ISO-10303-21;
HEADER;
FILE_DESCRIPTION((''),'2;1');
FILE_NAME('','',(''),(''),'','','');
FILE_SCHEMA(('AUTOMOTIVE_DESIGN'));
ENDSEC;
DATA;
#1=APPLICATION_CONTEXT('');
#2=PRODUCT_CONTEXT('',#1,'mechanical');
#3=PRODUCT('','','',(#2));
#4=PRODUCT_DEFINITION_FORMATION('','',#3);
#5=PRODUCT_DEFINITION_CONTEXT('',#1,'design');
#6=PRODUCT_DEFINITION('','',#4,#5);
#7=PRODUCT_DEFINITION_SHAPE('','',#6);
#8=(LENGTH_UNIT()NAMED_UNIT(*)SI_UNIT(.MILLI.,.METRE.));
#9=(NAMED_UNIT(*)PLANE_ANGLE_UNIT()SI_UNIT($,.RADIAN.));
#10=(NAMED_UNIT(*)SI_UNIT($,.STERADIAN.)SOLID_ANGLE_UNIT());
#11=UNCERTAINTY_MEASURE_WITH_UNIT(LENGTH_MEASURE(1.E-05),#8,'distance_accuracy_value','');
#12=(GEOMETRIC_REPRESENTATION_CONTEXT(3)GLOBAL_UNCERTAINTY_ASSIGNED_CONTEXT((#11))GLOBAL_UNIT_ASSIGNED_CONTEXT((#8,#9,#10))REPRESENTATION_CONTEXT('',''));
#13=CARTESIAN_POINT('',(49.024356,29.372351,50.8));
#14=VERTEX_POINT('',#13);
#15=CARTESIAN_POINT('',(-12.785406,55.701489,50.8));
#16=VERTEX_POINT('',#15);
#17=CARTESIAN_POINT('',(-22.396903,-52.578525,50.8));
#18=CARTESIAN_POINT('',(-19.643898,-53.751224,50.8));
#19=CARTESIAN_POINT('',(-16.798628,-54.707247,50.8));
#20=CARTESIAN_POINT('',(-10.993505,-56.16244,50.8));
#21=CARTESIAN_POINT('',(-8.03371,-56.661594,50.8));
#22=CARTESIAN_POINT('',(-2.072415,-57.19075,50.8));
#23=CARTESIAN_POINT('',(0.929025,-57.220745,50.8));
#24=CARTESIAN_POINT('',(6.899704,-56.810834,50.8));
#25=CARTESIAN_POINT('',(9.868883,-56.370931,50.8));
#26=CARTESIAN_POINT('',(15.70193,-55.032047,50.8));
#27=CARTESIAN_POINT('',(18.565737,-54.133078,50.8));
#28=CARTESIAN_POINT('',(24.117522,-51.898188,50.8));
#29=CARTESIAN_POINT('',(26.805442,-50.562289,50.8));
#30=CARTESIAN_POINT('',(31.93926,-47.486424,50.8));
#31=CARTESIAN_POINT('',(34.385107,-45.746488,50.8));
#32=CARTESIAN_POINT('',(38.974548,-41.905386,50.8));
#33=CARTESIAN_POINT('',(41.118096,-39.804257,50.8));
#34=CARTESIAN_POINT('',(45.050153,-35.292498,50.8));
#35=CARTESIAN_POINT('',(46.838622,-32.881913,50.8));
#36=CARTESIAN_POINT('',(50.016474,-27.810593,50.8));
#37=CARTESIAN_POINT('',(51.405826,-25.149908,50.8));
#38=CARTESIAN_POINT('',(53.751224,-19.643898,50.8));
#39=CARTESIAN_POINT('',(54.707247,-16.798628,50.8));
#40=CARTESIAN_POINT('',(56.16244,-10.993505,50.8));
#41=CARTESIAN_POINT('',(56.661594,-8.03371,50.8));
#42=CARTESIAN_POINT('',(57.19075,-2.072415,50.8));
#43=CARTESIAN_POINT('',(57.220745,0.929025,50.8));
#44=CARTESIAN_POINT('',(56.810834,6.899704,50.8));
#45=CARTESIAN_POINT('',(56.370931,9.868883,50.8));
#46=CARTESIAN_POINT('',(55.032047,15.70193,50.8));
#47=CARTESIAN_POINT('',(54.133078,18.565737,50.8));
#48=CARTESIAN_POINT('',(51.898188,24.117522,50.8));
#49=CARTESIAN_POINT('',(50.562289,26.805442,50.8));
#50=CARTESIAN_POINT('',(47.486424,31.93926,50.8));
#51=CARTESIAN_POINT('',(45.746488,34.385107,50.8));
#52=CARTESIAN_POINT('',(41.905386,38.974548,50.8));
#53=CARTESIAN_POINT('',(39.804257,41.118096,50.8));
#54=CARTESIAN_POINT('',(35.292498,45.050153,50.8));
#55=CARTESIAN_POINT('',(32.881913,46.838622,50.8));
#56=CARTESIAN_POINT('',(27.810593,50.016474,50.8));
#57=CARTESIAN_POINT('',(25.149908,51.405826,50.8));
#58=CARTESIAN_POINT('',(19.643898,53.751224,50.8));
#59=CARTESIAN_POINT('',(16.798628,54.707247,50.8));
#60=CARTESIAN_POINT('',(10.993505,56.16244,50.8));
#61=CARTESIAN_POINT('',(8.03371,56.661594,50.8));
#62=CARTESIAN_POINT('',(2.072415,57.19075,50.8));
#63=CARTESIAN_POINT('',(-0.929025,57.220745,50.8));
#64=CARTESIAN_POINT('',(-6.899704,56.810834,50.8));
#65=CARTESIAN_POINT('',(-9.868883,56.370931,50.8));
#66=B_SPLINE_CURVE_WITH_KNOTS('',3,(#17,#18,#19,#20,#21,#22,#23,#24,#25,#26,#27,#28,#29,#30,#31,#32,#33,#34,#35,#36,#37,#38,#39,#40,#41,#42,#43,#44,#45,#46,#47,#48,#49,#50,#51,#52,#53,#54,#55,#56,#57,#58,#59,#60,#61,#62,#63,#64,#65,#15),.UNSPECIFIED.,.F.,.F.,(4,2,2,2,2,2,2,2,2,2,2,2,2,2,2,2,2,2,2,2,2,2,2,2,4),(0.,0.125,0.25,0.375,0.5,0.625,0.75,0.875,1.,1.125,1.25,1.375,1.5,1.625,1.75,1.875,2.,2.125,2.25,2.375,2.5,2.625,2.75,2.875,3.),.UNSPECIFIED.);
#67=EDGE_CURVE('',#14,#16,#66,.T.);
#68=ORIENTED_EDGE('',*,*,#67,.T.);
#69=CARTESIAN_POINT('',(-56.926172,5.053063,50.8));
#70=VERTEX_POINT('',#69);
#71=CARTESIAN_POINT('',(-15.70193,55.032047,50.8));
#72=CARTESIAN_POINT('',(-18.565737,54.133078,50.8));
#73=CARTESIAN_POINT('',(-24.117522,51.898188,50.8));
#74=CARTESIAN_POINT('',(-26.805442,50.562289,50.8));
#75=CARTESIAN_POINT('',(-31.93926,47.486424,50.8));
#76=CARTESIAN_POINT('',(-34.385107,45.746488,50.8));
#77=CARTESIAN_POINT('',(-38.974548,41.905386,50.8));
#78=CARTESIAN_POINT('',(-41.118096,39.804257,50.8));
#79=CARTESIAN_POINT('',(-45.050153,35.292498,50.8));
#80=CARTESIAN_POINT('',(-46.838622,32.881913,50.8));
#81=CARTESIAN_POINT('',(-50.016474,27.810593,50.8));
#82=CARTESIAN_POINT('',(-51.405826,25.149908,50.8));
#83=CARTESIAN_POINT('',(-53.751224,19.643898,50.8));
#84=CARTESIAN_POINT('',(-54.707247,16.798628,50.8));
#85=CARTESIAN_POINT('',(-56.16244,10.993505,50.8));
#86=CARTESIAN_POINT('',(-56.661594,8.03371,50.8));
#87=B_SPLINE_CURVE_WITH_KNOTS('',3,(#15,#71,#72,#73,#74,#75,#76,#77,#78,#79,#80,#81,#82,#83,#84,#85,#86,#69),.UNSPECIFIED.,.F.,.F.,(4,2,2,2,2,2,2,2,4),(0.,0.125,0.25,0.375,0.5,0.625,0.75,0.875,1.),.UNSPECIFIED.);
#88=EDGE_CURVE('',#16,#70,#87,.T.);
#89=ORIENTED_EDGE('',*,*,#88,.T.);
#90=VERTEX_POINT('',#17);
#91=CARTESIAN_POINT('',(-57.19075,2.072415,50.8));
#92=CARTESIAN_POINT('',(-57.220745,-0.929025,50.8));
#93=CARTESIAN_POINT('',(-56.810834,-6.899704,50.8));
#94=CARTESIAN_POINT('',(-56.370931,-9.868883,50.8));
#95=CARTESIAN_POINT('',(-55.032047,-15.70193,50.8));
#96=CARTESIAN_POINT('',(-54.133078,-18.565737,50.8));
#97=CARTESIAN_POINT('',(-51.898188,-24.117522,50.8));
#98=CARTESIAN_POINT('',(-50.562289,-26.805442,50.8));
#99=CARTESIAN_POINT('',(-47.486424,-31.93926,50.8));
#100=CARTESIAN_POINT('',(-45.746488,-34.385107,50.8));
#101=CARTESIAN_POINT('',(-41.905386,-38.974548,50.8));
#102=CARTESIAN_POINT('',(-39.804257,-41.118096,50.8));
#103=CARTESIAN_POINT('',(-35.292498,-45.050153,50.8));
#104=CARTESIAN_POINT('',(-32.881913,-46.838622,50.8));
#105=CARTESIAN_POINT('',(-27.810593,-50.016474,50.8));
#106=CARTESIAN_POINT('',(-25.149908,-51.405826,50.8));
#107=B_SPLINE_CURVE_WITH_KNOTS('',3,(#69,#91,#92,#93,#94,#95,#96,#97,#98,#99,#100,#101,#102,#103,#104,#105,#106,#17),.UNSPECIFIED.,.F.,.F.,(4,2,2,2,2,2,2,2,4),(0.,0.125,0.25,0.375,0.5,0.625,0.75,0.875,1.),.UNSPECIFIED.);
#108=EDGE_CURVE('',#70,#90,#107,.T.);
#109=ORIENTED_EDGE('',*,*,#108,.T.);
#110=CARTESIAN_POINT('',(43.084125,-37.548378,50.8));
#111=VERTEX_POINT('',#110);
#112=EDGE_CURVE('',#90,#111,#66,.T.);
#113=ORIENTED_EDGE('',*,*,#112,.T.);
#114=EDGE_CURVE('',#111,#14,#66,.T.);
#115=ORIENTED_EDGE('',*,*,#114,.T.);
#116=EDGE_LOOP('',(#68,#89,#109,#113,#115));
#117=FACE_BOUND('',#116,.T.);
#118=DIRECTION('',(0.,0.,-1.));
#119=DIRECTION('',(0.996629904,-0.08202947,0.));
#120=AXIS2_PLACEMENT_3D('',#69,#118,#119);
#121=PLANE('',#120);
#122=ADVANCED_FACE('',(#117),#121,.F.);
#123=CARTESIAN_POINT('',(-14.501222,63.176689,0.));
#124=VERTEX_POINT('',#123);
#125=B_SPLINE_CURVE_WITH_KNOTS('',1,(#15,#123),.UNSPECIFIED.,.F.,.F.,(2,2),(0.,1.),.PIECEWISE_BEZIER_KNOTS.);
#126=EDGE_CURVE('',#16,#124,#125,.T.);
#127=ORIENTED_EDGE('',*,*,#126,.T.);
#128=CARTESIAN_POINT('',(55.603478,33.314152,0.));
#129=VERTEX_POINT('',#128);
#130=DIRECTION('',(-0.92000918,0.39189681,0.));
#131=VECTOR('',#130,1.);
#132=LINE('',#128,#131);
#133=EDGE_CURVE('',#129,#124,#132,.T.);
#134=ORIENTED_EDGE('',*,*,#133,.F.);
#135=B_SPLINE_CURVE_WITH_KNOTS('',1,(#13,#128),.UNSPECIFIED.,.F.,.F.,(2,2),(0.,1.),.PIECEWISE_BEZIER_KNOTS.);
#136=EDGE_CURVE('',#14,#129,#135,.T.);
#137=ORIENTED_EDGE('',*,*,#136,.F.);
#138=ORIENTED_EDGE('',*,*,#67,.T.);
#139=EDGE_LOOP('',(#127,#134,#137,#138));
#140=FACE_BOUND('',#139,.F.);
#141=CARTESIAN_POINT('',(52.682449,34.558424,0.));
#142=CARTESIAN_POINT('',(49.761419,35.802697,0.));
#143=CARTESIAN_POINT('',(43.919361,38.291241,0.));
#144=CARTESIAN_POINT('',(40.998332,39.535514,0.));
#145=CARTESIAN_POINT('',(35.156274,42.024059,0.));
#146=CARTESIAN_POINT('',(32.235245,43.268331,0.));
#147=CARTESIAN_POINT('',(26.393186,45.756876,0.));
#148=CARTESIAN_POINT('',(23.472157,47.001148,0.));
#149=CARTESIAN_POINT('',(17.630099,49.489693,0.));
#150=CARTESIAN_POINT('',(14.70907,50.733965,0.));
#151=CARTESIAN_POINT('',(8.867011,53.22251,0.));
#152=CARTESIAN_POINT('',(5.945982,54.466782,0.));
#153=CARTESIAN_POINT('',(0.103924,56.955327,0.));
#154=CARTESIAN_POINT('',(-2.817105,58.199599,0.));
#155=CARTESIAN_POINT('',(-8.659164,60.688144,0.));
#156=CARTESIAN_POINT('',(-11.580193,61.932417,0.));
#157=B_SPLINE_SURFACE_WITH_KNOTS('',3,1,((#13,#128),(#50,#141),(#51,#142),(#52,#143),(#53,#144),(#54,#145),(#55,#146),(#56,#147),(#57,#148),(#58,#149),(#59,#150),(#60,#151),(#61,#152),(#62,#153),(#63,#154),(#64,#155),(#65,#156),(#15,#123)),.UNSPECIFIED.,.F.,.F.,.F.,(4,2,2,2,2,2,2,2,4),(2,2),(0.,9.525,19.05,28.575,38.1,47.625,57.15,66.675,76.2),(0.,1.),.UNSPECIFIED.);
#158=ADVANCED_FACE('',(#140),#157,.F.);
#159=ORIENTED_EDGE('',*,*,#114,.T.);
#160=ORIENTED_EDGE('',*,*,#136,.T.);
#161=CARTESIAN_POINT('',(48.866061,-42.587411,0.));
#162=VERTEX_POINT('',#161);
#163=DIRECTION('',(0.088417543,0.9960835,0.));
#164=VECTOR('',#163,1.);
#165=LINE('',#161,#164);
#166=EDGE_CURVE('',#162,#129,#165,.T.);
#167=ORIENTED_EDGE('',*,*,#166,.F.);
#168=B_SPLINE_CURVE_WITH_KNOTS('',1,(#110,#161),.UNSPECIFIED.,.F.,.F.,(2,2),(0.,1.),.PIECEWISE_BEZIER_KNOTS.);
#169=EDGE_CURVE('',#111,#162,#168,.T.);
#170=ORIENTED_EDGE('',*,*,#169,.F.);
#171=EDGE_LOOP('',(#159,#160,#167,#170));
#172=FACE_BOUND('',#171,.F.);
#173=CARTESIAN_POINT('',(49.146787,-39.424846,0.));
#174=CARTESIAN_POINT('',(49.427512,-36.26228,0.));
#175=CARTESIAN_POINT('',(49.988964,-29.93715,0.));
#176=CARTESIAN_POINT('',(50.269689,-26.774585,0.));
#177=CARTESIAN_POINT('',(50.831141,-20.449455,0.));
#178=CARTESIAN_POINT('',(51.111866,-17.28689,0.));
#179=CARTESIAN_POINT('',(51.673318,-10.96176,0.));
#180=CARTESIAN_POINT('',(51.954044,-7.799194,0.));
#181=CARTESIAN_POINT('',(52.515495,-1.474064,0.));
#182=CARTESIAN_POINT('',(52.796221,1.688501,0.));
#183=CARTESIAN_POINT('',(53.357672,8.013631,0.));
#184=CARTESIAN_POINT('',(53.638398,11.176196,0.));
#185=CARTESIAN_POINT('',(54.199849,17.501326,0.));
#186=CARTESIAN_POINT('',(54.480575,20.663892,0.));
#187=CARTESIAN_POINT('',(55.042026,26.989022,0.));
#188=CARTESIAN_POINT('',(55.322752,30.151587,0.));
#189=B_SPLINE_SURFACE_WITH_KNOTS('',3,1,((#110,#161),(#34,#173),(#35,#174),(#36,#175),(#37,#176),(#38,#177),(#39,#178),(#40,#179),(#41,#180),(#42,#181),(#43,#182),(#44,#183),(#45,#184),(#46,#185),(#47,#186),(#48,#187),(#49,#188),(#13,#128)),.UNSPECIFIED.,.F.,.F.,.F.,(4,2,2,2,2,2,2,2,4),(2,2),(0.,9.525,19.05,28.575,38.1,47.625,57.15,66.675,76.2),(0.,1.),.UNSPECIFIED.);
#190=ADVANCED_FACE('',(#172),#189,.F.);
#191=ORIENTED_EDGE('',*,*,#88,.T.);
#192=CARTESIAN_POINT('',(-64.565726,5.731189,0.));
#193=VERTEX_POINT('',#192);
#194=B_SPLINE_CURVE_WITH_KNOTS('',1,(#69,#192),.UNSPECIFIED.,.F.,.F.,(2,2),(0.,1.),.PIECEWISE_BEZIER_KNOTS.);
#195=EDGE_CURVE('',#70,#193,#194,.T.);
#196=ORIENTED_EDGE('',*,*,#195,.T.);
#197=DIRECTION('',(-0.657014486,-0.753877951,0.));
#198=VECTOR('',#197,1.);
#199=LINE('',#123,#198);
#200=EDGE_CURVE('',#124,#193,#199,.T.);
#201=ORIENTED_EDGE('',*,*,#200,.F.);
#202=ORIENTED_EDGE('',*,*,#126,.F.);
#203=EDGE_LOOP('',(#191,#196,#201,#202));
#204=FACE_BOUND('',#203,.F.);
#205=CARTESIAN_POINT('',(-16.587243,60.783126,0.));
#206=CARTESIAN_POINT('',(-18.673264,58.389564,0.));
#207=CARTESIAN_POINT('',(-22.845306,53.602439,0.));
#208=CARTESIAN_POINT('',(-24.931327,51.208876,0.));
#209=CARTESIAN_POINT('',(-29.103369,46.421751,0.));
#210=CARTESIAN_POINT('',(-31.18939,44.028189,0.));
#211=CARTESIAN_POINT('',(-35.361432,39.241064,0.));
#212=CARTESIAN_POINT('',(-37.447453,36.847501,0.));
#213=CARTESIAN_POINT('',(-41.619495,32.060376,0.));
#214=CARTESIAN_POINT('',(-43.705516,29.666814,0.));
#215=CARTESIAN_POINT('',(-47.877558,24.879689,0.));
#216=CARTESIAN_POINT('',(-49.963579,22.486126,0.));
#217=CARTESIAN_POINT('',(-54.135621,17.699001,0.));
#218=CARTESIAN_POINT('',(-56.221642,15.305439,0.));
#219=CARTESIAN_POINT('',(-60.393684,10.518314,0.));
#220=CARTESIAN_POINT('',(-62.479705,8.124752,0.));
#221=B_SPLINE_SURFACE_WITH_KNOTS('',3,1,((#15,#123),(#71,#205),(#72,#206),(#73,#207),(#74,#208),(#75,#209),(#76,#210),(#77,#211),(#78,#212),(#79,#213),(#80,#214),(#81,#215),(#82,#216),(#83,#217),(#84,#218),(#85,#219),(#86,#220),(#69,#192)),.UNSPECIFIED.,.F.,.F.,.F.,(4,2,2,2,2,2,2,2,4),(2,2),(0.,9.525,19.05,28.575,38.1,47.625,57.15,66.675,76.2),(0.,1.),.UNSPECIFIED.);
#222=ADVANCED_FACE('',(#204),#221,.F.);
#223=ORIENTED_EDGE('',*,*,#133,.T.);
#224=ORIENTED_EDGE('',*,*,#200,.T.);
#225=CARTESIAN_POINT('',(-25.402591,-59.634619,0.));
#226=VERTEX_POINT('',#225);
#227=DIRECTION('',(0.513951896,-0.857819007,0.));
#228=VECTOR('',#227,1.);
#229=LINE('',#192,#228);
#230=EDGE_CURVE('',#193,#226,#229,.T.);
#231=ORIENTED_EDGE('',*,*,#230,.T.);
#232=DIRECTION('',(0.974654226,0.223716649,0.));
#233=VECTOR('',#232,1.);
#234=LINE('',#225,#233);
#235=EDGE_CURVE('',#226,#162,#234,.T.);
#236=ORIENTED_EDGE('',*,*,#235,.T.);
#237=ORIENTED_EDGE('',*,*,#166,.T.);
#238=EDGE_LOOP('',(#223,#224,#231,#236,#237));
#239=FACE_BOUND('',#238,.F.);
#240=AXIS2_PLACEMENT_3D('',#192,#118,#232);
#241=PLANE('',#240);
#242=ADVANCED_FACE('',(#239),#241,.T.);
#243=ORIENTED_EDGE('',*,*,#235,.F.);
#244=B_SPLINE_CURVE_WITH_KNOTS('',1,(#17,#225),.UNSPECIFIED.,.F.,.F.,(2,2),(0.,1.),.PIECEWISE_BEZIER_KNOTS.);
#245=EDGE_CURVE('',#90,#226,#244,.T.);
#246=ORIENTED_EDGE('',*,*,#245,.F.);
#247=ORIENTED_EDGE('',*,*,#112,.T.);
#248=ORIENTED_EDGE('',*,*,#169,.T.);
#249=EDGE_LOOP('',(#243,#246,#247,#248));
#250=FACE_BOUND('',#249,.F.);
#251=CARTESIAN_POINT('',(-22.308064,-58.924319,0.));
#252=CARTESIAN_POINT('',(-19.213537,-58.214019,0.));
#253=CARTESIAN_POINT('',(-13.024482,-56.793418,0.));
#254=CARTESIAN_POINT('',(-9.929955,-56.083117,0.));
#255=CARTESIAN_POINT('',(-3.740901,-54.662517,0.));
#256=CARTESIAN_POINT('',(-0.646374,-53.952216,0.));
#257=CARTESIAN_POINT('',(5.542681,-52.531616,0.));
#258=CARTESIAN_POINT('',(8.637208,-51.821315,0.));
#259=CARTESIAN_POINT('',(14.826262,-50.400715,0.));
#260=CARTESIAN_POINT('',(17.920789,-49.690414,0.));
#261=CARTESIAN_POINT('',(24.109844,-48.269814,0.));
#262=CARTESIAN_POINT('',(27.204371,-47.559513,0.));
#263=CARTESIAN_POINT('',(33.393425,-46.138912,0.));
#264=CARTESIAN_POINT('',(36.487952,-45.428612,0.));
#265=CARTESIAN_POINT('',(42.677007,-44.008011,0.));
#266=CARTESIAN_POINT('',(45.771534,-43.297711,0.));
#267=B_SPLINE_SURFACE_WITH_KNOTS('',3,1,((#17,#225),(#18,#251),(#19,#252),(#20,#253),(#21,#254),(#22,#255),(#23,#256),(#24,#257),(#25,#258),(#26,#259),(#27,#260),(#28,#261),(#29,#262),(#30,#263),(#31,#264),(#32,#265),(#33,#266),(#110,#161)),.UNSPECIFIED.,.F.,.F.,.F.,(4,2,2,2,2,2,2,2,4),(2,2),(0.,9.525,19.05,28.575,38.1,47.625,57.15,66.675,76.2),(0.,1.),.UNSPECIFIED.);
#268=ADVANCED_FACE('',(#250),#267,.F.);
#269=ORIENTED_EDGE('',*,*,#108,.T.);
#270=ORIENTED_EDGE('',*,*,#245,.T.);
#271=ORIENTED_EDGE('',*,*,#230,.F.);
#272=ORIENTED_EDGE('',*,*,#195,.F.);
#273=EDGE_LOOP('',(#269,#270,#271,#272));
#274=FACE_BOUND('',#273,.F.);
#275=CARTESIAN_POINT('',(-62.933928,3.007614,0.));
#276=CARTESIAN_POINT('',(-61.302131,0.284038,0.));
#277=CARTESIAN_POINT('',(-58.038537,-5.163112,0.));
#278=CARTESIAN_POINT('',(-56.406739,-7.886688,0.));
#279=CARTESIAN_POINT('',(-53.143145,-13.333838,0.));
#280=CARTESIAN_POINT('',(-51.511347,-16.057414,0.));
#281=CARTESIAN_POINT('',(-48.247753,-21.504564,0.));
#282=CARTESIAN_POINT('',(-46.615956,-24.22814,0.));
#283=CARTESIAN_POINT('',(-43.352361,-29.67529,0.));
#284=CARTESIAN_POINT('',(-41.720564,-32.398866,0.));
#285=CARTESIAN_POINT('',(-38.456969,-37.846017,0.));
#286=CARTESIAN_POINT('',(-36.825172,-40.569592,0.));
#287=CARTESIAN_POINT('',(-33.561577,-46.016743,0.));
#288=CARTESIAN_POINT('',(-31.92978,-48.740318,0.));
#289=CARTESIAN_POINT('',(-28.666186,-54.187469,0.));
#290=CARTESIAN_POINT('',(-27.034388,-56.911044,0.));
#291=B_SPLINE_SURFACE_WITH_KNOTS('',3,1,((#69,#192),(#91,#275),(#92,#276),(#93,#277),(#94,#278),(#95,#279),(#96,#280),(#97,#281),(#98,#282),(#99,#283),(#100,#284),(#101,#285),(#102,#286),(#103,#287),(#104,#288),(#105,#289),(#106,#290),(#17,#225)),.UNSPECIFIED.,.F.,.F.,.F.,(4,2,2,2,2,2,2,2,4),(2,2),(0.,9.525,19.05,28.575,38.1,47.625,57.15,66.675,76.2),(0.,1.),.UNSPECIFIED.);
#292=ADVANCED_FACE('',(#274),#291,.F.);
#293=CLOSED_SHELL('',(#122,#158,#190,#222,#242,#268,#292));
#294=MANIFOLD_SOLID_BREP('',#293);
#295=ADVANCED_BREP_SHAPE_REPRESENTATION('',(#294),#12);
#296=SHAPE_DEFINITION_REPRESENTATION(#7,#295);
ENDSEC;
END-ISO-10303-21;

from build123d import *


# Not quite as in the source:
# - the arcs of a loft's sections are written as splines that run evenly, so that the points pair up as in the source's solid


with BuildPart() as f3:
    # F2 (on offset) → F3 section 0
    with BuildSketch(Plane.XY.offset(50.8)):
        with BuildLine():
            add(Edge.make_bspline(
                [(-56.9261720001, 5.0530625782), (-57.190749738, 2.0724151823), (-57.2207451344, -0.9290245136), (-56.8108338665, -6.8997040281), (-56.3709313566, -9.8688833346), (-55.0320467208, -15.7019296265), (-54.1330781644, -18.5657374948), (-51.898187944, -24.1175216058), (-50.5622889304, -26.8054415818), (-47.4864235398, -31.9392601616), (-45.7464883364, -34.3851067349), (-41.9053857897, -38.974548132), (-39.8042573756, -41.1180964425), (-35.2924983654, -45.0501533783), (-32.8819134954, -46.8386221526), (-27.8105925023, -50.0164743355), (-25.1499077762, -51.4058255369), (-22.3969026649, -52.5785246181)],
                knots=[0, 0, 0, 0, 0.125, 0.125, 0.25, 0.25, 0.375, 0.375, 0.5, 0.5, 0.625, 0.625, 0.75, 0.75, 0.875, 0.875, 1, 1, 1, 1], degree=3))
            add(Edge.make_bspline(
                [(-22.3969026649, -52.5785246181), (-19.6438975537, -53.7512236994), (-16.7986278598, -54.7072468902), (-10.9935046529, -56.1624395457), (-8.033709974, -56.6615942622), (-2.0724151823, -57.190749738), (0.9290245136, -57.2207451344), (6.8997040281, -56.8108338665), (9.8688833346, -56.3709313566), (15.7019296265, -55.0320467208), (18.5657374948, -54.1330781644), (24.1175216058, -51.898187944), (26.8054415818, -50.5622889304), (31.9392601616, -47.4864235398), (34.3851067349, -45.7464883364), (38.974548132, -41.9053857897), (41.1180964425, -39.8042573756), (43.0841249104, -37.5483778705)],
                knots=[0, 0, 0, 0, 0.125, 0.125, 0.25, 0.25, 0.375, 0.375, 0.5, 0.5, 0.625, 0.625, 0.75, 0.75, 0.875, 0.875, 1, 1, 1, 1], degree=3))
            add(Edge.make_bspline(
                [(43.0841249104, -37.5483778705), (45.0501533783, -35.2924983654), (46.8386221526, -32.8819134954), (50.0164743355, -27.8105925023), (51.4058255369, -25.1499077762), (53.7512236994, -19.6438975537), (54.7072468902, -16.7986278598), (56.1624395457, -10.9935046529), (56.6615942622, -8.033709974), (57.190749738, -2.0724151823), (57.2207451344, 0.9290245136), (56.8108338665, 6.8997040281), (56.3709313566, 9.8688833346), (55.0320467208, 15.7019296265), (54.1330781644, 18.5657374948), (51.898187944, 24.1175216058), (50.5622889304, 26.8054415818), (49.0243562351, 29.3723508717)],
                knots=[0, 0, 0, 0, 0.125, 0.125, 0.25, 0.25, 0.375, 0.375, 0.5, 0.5, 0.625, 0.625, 0.75, 0.75, 0.875, 0.875, 1, 1, 1, 1], degree=3))
            add(Edge.make_bspline(
                [(49.0243562351, 29.3723508717), (47.4864235398, 31.9392601616), (45.7464883364, 34.3851067349), (41.9053857897, 38.974548132), (39.8042573756, 41.1180964425), (35.2924983654, 45.0501533783), (32.8819134954, 46.8386221526), (27.8105925023, 50.0164743355), (25.1499077762, 51.4058255369), (19.6438975537, 53.7512236994), (16.7986278598, 54.7072468902), (10.9935046529, 56.1624395457), (8.033709974, 56.6615942622), (2.0724151823, 57.190749738), (-0.9290245136, 57.2207451344), (-6.8997040281, 56.8108338665), (-9.8688833346, 56.3709313566), (-12.7854064805, 55.7014890387)],
                knots=[0, 0, 0, 0, 0.125, 0.125, 0.25, 0.25, 0.375, 0.375, 0.5, 0.5, 0.625, 0.625, 0.75, 0.75, 0.875, 0.875, 1, 1, 1, 1], degree=3))
            add(Edge.make_bspline(
                [(-12.7854064805, 55.7014890387), (-15.7019296265, 55.0320467208), (-18.5657374948, 54.1330781644), (-24.1175216058, 51.898187944), (-26.8054415818, 50.5622889304), (-31.9392601616, 47.4864235398), (-34.3851067349, 45.7464883364), (-38.974548132, 41.9053857897), (-41.1180964425, 39.8042573756), (-45.0501533783, 35.2924983654), (-46.8386221526, 32.8819134954), (-50.0164743355, 27.8105925023), (-51.4058255369, 25.1499077762), (-53.7512236994, 19.6438975537), (-54.7072468902, 16.7986278598), (-56.1624395457, 10.9935046529), (-56.6615942622, 8.033709974), (-56.9261720001, 5.0530625782)],
                knots=[0, 0, 0, 0, 0.125, 0.125, 0.25, 0.25, 0.375, 0.375, 0.5, 0.5, 0.625, 0.625, 0.75, 0.75, 0.875, 0.875, 1, 1, 1, 1], degree=3))
        make_face()
    # F0 (on Top) → F3 section 1
    with BuildSketch(Plane.XY):
        Polygon((-64.5657256377, 5.7311890224), (-25.402591142, -59.6346192911), (48.8660609096, -42.5874106504), (55.6034776805, 33.3141520163), (-14.5012218103, 63.1766889029), align=None)
    loft(ruled=True)


solid = f3.part
